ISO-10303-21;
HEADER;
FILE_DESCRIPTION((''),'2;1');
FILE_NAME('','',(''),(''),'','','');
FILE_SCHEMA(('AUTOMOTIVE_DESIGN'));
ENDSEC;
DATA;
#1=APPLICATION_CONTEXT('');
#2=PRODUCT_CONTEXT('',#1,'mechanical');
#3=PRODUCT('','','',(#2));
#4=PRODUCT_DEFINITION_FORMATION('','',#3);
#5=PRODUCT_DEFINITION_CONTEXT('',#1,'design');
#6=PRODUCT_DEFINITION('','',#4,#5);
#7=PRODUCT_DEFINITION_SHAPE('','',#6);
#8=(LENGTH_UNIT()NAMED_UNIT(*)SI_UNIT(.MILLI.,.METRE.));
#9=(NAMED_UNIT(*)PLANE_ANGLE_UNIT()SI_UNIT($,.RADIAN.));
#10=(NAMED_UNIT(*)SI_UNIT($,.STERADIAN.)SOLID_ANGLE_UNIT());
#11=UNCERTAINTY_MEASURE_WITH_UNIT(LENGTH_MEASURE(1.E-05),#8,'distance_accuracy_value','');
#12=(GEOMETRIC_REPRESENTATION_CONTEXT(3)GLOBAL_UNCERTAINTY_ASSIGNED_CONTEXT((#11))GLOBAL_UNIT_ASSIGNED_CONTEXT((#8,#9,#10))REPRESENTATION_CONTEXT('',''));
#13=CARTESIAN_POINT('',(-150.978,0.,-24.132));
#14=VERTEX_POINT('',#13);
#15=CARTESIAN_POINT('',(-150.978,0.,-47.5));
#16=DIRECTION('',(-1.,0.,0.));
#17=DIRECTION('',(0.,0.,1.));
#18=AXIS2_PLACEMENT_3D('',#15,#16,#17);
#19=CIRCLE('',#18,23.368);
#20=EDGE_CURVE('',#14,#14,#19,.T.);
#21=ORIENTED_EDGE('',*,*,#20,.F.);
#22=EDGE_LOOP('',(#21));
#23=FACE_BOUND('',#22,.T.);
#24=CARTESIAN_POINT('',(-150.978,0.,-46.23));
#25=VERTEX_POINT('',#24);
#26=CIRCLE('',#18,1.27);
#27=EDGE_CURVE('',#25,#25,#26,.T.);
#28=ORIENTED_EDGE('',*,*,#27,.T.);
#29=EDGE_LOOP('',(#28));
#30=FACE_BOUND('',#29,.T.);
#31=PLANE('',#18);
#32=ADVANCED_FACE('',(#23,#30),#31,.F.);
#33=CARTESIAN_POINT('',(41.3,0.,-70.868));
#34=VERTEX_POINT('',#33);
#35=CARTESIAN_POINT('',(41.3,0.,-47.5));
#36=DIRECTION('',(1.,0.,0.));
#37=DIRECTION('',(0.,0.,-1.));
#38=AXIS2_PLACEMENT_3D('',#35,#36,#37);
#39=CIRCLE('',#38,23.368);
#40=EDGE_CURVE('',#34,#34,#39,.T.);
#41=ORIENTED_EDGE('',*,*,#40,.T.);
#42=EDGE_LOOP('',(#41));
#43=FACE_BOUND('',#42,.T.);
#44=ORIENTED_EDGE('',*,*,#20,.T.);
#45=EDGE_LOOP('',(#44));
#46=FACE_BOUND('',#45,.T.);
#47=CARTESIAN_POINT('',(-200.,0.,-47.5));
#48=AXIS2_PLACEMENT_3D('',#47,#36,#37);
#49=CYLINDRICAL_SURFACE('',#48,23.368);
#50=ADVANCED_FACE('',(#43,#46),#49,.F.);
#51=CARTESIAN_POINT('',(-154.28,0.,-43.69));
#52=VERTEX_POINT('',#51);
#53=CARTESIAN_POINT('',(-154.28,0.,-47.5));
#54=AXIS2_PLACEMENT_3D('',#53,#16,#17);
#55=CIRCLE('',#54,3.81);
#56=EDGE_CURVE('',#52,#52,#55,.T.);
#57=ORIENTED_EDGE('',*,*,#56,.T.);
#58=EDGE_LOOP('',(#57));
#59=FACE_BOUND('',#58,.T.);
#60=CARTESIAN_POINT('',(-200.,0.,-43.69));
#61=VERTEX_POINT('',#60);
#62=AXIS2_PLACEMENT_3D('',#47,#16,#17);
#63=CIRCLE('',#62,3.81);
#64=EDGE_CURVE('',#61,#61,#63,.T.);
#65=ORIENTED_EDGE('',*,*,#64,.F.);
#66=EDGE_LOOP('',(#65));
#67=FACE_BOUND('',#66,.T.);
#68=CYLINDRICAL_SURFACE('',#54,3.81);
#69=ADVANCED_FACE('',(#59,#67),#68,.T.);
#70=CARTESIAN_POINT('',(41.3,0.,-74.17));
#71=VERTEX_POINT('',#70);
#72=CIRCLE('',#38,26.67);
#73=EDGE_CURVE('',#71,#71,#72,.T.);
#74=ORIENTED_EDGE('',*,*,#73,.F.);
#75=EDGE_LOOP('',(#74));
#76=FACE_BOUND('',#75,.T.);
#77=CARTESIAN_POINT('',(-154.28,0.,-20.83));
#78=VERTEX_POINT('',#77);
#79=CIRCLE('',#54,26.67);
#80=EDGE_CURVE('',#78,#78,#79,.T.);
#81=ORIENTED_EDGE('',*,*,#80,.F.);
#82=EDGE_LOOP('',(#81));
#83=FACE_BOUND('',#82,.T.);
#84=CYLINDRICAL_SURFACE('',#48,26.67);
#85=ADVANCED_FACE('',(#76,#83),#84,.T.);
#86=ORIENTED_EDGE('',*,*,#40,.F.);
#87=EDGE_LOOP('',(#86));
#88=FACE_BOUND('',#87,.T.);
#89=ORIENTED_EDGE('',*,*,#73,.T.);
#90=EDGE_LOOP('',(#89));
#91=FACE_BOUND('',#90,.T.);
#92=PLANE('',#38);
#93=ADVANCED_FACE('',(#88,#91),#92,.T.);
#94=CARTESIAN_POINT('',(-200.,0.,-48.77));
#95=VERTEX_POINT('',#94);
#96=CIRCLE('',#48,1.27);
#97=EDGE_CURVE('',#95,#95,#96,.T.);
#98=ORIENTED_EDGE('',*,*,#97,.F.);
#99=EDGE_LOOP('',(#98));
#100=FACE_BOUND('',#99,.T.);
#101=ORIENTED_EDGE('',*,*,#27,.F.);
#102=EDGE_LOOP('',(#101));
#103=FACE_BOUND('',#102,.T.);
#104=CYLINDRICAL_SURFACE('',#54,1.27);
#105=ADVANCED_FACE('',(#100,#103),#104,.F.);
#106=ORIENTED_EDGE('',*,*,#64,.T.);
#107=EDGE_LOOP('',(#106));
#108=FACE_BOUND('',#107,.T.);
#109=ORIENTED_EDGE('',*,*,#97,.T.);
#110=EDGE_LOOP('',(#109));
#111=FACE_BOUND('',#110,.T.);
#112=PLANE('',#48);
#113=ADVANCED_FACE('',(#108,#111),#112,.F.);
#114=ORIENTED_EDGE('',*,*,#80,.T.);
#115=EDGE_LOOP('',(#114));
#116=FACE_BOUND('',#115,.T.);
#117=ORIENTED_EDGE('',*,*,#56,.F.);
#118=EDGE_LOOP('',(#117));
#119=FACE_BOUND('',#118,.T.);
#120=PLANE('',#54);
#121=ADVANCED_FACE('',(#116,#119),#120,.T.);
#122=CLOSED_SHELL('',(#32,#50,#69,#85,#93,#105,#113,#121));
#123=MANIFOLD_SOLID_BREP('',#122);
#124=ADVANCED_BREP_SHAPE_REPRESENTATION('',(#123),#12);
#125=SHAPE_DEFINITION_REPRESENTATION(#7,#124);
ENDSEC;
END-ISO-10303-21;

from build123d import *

# Parameters (mm, degrees)
SWEEP1_PROFILE_R   = 26.67
CUT_EXTRUDE1_START = -45.72
SKETCH2_R          = 26.67
SKETCH2_R_2        = 3.81
CUT_EXTRUDE1_DEPTH = 45.72
SHELL1_START       = -150.978
SHELL1_OUTLINE_R   = 23.368
SHELL1_DEPTH       = 192.278
SHELL1_START_2     = -197.46
SHELL1_2_OUTLINE_R = 1.27
SHELL1_2_DEPTH     = 46.482
SKETCH3_R          = 1.27
CUT_EXTRUDE2_DEPTH = 252.433520836


# Read off the part's stored shape, not the designer's step: Shell1
with BuildPart() as part:
    # Sweep1: sweep along a path in Sketch1
    with BuildLine(Plane(origin=(0, 0, 0), x_dir=(1, 0, 0), z_dir=(0, 1, 0))) as sweep1_path:
        Line((-200, 47.5), (41.3, 47.5))
    # Sweep1 profile (on start of the path) → Sweep1 (sweep)
    with BuildSketch(Plane(origin=(-200, 0, -47.5), x_dir=(0, 0, 1), z_dir=(1, 0, 0))):
        Circle(SWEEP1_PROFILE_R)
    sweep(path=sweep1_path.line)

    # Sketch2 → Cut-Extrude1 (cut)
    with BuildSketch(Plane.ZY.offset(200).offset(CUT_EXTRUDE1_START)):
        with Locations(Location((-47.5, 0, 0), (0, 0, 180))):
            Circle(SKETCH2_R)
        with Locations((-47.5, 0)):
            Circle(SKETCH2_R_2, mode=Mode.SUBTRACT)
    extrude(amount=CUT_EXTRUDE1_DEPTH, mode=Mode.SUBTRACT)

    # Shell1 outline → Shell1 (cut)
    with BuildSketch(Plane.YZ.offset(SHELL1_START)):
        with Locations((0, -47.5)):
            Circle(SHELL1_OUTLINE_R)
    extrude(amount=SHELL1_DEPTH, mode=Mode.SUBTRACT)

    # Shell1 2 outline → Shell1 2 (cut)
    with BuildSketch(Plane.YZ.offset(SHELL1_START_2)):
        with Locations((0, -47.5)):
            Circle(SHELL1_2_OUTLINE_R)
    extrude(amount=SHELL1_2_DEPTH, mode=Mode.SUBTRACT)

    # Sketch3 → Cut-Extrude2 (cut, through all)
    with BuildSketch(Plane(origin=(-197.46, 0, 0), x_dir=(0, 0, -1), z_dir=(1, 0, 0))):
        with Locations(Location((47.5, 0, 0), (0, 0, 180))):
            Circle(SKETCH3_R)
    extrude(amount=-CUT_EXTRUDE2_DEPTH, mode=Mode.SUBTRACT)


solid = part.part
